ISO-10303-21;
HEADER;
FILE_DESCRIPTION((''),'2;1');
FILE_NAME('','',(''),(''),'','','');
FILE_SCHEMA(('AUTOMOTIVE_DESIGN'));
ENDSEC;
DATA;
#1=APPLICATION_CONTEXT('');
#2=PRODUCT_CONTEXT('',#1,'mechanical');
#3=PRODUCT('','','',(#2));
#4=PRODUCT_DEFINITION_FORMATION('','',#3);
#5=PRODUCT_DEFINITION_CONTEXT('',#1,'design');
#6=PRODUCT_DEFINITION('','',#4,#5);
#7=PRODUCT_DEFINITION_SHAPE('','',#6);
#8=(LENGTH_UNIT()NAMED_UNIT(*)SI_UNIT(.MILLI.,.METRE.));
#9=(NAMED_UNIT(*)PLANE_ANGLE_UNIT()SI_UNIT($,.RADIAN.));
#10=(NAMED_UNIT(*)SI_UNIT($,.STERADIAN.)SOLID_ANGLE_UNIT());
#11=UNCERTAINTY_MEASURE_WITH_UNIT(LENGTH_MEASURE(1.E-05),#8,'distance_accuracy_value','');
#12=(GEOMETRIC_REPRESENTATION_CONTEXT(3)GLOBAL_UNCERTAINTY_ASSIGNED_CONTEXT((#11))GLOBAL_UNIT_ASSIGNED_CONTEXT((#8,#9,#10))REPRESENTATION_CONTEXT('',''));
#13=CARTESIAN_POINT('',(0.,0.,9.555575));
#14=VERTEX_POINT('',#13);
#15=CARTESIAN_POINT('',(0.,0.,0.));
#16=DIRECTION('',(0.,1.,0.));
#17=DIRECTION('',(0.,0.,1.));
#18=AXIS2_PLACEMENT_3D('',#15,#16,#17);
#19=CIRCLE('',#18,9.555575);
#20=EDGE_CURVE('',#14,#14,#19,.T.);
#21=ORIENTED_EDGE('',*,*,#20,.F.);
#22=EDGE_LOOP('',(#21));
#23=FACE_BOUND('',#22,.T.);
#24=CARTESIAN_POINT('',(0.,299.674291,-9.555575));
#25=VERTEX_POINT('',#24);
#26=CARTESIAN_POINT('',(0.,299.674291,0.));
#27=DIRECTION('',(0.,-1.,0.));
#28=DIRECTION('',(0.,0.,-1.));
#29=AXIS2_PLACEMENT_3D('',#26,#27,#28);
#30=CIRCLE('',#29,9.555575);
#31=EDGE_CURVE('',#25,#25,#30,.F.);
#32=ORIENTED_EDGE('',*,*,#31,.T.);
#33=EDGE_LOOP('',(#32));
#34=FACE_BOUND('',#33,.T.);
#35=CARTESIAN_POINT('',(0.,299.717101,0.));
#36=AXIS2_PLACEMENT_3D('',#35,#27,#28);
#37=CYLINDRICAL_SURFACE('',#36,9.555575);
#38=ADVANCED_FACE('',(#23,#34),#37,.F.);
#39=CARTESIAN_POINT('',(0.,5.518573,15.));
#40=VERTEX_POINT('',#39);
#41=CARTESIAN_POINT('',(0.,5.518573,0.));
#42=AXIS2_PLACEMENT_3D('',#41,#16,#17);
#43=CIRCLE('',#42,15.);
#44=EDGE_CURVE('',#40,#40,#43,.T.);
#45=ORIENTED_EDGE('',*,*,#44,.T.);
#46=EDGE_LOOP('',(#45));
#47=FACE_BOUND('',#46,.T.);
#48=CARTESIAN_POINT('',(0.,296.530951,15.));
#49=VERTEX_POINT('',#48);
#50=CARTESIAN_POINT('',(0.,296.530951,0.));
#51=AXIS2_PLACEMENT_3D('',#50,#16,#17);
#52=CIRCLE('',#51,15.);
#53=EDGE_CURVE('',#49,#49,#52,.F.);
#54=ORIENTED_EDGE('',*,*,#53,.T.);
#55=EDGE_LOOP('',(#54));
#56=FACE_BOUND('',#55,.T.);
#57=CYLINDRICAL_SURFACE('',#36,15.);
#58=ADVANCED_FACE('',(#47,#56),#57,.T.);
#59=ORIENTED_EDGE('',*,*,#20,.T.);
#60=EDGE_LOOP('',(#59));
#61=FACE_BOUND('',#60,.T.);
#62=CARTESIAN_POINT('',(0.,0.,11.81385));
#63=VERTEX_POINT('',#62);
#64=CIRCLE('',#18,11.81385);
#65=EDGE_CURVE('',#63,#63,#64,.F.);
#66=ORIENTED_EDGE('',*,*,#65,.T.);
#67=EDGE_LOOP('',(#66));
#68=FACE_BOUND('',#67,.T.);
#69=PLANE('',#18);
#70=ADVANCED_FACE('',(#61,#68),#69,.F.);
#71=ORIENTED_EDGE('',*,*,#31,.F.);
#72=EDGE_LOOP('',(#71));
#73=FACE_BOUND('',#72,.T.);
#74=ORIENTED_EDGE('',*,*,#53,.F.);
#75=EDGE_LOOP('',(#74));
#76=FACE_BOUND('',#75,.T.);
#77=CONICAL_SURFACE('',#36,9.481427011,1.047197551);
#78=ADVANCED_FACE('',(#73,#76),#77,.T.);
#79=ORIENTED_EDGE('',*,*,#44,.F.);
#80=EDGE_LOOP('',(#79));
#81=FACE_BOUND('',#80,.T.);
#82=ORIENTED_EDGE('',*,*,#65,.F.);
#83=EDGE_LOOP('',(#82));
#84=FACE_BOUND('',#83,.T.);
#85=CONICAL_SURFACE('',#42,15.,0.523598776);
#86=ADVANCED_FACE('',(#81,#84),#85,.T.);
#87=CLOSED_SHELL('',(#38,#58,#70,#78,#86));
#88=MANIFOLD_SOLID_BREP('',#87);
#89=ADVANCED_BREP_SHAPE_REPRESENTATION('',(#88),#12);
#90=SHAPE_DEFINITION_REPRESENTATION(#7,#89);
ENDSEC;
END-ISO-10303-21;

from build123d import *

# Parameters (mm, degrees)
SKETCH1_R           = 15
BOSS_EXTRUDE1_DEPTH = 299.717101
SKETCH2_R           = 9.555575494
CUT_EXTRUDE1_DEPTH  = 301.466871105
CHAMFER1_SIZE       = 3.18615
CHAMFER1_SIZE_2     = 5.518573


with BuildPart() as part:
    # Sketch1 → Boss-Extrude1 (new body)
    with BuildSketch(Plane(origin=(0, 0, 0), x_dir=(1, 0, 0), z_dir=(0, 1, 0))):
        with Locations(Location((0, 0, 0), (0, 0, 270))):
            Circle(SKETCH1_R)
    extrude(amount=BOSS_EXTRUDE1_DEPTH)

    # Sketch2 → Cut-Extrude1 (cut, through all)
    with BuildSketch(Plane(origin=(0, 0, 0), x_dir=(1, 0, 0), z_dir=(0, 1, 0))):
        with Locations(Location((0, 0, 0), (0, 0, 270))):
            Circle(SKETCH2_R)
    extrude(amount=CUT_EXTRUDE1_DEPTH, mode=Mode.SUBTRACT)

    # Chamfer1
    # the kernel refuses this chamfer: 5.518573, 3.18615 mm, written as the material it takes off along each edge
    with BuildSketch(Plane(origin=(0, 299.717101, 0), x_dir=(0, 0, 1), z_dir=(-1, 0, 0))) as chamfer1_piece_1:
        Polygon((15, -CHAMFER1_SIZE), (15 - CHAMFER1_SIZE_2, 0), (15, 0), align=None)
    revolve(axis=Axis((0, 299.717101, 0), (0, 1, 0)), mode=Mode.SUBTRACT)
    with BuildSketch(Plane(origin=(0, 0, 0), x_dir=(0, 0, 1), z_dir=(-1, 0, 0))) as chamfer1_piece_2:
        Polygon((15, CHAMFER1_SIZE_2), (15 - CHAMFER1_SIZE, 0), (15, 0), align=None)
    revolve(axis=Axis((0, 0, 0), (0, 1, 0)), mode=Mode.SUBTRACT)


solid = part.part
